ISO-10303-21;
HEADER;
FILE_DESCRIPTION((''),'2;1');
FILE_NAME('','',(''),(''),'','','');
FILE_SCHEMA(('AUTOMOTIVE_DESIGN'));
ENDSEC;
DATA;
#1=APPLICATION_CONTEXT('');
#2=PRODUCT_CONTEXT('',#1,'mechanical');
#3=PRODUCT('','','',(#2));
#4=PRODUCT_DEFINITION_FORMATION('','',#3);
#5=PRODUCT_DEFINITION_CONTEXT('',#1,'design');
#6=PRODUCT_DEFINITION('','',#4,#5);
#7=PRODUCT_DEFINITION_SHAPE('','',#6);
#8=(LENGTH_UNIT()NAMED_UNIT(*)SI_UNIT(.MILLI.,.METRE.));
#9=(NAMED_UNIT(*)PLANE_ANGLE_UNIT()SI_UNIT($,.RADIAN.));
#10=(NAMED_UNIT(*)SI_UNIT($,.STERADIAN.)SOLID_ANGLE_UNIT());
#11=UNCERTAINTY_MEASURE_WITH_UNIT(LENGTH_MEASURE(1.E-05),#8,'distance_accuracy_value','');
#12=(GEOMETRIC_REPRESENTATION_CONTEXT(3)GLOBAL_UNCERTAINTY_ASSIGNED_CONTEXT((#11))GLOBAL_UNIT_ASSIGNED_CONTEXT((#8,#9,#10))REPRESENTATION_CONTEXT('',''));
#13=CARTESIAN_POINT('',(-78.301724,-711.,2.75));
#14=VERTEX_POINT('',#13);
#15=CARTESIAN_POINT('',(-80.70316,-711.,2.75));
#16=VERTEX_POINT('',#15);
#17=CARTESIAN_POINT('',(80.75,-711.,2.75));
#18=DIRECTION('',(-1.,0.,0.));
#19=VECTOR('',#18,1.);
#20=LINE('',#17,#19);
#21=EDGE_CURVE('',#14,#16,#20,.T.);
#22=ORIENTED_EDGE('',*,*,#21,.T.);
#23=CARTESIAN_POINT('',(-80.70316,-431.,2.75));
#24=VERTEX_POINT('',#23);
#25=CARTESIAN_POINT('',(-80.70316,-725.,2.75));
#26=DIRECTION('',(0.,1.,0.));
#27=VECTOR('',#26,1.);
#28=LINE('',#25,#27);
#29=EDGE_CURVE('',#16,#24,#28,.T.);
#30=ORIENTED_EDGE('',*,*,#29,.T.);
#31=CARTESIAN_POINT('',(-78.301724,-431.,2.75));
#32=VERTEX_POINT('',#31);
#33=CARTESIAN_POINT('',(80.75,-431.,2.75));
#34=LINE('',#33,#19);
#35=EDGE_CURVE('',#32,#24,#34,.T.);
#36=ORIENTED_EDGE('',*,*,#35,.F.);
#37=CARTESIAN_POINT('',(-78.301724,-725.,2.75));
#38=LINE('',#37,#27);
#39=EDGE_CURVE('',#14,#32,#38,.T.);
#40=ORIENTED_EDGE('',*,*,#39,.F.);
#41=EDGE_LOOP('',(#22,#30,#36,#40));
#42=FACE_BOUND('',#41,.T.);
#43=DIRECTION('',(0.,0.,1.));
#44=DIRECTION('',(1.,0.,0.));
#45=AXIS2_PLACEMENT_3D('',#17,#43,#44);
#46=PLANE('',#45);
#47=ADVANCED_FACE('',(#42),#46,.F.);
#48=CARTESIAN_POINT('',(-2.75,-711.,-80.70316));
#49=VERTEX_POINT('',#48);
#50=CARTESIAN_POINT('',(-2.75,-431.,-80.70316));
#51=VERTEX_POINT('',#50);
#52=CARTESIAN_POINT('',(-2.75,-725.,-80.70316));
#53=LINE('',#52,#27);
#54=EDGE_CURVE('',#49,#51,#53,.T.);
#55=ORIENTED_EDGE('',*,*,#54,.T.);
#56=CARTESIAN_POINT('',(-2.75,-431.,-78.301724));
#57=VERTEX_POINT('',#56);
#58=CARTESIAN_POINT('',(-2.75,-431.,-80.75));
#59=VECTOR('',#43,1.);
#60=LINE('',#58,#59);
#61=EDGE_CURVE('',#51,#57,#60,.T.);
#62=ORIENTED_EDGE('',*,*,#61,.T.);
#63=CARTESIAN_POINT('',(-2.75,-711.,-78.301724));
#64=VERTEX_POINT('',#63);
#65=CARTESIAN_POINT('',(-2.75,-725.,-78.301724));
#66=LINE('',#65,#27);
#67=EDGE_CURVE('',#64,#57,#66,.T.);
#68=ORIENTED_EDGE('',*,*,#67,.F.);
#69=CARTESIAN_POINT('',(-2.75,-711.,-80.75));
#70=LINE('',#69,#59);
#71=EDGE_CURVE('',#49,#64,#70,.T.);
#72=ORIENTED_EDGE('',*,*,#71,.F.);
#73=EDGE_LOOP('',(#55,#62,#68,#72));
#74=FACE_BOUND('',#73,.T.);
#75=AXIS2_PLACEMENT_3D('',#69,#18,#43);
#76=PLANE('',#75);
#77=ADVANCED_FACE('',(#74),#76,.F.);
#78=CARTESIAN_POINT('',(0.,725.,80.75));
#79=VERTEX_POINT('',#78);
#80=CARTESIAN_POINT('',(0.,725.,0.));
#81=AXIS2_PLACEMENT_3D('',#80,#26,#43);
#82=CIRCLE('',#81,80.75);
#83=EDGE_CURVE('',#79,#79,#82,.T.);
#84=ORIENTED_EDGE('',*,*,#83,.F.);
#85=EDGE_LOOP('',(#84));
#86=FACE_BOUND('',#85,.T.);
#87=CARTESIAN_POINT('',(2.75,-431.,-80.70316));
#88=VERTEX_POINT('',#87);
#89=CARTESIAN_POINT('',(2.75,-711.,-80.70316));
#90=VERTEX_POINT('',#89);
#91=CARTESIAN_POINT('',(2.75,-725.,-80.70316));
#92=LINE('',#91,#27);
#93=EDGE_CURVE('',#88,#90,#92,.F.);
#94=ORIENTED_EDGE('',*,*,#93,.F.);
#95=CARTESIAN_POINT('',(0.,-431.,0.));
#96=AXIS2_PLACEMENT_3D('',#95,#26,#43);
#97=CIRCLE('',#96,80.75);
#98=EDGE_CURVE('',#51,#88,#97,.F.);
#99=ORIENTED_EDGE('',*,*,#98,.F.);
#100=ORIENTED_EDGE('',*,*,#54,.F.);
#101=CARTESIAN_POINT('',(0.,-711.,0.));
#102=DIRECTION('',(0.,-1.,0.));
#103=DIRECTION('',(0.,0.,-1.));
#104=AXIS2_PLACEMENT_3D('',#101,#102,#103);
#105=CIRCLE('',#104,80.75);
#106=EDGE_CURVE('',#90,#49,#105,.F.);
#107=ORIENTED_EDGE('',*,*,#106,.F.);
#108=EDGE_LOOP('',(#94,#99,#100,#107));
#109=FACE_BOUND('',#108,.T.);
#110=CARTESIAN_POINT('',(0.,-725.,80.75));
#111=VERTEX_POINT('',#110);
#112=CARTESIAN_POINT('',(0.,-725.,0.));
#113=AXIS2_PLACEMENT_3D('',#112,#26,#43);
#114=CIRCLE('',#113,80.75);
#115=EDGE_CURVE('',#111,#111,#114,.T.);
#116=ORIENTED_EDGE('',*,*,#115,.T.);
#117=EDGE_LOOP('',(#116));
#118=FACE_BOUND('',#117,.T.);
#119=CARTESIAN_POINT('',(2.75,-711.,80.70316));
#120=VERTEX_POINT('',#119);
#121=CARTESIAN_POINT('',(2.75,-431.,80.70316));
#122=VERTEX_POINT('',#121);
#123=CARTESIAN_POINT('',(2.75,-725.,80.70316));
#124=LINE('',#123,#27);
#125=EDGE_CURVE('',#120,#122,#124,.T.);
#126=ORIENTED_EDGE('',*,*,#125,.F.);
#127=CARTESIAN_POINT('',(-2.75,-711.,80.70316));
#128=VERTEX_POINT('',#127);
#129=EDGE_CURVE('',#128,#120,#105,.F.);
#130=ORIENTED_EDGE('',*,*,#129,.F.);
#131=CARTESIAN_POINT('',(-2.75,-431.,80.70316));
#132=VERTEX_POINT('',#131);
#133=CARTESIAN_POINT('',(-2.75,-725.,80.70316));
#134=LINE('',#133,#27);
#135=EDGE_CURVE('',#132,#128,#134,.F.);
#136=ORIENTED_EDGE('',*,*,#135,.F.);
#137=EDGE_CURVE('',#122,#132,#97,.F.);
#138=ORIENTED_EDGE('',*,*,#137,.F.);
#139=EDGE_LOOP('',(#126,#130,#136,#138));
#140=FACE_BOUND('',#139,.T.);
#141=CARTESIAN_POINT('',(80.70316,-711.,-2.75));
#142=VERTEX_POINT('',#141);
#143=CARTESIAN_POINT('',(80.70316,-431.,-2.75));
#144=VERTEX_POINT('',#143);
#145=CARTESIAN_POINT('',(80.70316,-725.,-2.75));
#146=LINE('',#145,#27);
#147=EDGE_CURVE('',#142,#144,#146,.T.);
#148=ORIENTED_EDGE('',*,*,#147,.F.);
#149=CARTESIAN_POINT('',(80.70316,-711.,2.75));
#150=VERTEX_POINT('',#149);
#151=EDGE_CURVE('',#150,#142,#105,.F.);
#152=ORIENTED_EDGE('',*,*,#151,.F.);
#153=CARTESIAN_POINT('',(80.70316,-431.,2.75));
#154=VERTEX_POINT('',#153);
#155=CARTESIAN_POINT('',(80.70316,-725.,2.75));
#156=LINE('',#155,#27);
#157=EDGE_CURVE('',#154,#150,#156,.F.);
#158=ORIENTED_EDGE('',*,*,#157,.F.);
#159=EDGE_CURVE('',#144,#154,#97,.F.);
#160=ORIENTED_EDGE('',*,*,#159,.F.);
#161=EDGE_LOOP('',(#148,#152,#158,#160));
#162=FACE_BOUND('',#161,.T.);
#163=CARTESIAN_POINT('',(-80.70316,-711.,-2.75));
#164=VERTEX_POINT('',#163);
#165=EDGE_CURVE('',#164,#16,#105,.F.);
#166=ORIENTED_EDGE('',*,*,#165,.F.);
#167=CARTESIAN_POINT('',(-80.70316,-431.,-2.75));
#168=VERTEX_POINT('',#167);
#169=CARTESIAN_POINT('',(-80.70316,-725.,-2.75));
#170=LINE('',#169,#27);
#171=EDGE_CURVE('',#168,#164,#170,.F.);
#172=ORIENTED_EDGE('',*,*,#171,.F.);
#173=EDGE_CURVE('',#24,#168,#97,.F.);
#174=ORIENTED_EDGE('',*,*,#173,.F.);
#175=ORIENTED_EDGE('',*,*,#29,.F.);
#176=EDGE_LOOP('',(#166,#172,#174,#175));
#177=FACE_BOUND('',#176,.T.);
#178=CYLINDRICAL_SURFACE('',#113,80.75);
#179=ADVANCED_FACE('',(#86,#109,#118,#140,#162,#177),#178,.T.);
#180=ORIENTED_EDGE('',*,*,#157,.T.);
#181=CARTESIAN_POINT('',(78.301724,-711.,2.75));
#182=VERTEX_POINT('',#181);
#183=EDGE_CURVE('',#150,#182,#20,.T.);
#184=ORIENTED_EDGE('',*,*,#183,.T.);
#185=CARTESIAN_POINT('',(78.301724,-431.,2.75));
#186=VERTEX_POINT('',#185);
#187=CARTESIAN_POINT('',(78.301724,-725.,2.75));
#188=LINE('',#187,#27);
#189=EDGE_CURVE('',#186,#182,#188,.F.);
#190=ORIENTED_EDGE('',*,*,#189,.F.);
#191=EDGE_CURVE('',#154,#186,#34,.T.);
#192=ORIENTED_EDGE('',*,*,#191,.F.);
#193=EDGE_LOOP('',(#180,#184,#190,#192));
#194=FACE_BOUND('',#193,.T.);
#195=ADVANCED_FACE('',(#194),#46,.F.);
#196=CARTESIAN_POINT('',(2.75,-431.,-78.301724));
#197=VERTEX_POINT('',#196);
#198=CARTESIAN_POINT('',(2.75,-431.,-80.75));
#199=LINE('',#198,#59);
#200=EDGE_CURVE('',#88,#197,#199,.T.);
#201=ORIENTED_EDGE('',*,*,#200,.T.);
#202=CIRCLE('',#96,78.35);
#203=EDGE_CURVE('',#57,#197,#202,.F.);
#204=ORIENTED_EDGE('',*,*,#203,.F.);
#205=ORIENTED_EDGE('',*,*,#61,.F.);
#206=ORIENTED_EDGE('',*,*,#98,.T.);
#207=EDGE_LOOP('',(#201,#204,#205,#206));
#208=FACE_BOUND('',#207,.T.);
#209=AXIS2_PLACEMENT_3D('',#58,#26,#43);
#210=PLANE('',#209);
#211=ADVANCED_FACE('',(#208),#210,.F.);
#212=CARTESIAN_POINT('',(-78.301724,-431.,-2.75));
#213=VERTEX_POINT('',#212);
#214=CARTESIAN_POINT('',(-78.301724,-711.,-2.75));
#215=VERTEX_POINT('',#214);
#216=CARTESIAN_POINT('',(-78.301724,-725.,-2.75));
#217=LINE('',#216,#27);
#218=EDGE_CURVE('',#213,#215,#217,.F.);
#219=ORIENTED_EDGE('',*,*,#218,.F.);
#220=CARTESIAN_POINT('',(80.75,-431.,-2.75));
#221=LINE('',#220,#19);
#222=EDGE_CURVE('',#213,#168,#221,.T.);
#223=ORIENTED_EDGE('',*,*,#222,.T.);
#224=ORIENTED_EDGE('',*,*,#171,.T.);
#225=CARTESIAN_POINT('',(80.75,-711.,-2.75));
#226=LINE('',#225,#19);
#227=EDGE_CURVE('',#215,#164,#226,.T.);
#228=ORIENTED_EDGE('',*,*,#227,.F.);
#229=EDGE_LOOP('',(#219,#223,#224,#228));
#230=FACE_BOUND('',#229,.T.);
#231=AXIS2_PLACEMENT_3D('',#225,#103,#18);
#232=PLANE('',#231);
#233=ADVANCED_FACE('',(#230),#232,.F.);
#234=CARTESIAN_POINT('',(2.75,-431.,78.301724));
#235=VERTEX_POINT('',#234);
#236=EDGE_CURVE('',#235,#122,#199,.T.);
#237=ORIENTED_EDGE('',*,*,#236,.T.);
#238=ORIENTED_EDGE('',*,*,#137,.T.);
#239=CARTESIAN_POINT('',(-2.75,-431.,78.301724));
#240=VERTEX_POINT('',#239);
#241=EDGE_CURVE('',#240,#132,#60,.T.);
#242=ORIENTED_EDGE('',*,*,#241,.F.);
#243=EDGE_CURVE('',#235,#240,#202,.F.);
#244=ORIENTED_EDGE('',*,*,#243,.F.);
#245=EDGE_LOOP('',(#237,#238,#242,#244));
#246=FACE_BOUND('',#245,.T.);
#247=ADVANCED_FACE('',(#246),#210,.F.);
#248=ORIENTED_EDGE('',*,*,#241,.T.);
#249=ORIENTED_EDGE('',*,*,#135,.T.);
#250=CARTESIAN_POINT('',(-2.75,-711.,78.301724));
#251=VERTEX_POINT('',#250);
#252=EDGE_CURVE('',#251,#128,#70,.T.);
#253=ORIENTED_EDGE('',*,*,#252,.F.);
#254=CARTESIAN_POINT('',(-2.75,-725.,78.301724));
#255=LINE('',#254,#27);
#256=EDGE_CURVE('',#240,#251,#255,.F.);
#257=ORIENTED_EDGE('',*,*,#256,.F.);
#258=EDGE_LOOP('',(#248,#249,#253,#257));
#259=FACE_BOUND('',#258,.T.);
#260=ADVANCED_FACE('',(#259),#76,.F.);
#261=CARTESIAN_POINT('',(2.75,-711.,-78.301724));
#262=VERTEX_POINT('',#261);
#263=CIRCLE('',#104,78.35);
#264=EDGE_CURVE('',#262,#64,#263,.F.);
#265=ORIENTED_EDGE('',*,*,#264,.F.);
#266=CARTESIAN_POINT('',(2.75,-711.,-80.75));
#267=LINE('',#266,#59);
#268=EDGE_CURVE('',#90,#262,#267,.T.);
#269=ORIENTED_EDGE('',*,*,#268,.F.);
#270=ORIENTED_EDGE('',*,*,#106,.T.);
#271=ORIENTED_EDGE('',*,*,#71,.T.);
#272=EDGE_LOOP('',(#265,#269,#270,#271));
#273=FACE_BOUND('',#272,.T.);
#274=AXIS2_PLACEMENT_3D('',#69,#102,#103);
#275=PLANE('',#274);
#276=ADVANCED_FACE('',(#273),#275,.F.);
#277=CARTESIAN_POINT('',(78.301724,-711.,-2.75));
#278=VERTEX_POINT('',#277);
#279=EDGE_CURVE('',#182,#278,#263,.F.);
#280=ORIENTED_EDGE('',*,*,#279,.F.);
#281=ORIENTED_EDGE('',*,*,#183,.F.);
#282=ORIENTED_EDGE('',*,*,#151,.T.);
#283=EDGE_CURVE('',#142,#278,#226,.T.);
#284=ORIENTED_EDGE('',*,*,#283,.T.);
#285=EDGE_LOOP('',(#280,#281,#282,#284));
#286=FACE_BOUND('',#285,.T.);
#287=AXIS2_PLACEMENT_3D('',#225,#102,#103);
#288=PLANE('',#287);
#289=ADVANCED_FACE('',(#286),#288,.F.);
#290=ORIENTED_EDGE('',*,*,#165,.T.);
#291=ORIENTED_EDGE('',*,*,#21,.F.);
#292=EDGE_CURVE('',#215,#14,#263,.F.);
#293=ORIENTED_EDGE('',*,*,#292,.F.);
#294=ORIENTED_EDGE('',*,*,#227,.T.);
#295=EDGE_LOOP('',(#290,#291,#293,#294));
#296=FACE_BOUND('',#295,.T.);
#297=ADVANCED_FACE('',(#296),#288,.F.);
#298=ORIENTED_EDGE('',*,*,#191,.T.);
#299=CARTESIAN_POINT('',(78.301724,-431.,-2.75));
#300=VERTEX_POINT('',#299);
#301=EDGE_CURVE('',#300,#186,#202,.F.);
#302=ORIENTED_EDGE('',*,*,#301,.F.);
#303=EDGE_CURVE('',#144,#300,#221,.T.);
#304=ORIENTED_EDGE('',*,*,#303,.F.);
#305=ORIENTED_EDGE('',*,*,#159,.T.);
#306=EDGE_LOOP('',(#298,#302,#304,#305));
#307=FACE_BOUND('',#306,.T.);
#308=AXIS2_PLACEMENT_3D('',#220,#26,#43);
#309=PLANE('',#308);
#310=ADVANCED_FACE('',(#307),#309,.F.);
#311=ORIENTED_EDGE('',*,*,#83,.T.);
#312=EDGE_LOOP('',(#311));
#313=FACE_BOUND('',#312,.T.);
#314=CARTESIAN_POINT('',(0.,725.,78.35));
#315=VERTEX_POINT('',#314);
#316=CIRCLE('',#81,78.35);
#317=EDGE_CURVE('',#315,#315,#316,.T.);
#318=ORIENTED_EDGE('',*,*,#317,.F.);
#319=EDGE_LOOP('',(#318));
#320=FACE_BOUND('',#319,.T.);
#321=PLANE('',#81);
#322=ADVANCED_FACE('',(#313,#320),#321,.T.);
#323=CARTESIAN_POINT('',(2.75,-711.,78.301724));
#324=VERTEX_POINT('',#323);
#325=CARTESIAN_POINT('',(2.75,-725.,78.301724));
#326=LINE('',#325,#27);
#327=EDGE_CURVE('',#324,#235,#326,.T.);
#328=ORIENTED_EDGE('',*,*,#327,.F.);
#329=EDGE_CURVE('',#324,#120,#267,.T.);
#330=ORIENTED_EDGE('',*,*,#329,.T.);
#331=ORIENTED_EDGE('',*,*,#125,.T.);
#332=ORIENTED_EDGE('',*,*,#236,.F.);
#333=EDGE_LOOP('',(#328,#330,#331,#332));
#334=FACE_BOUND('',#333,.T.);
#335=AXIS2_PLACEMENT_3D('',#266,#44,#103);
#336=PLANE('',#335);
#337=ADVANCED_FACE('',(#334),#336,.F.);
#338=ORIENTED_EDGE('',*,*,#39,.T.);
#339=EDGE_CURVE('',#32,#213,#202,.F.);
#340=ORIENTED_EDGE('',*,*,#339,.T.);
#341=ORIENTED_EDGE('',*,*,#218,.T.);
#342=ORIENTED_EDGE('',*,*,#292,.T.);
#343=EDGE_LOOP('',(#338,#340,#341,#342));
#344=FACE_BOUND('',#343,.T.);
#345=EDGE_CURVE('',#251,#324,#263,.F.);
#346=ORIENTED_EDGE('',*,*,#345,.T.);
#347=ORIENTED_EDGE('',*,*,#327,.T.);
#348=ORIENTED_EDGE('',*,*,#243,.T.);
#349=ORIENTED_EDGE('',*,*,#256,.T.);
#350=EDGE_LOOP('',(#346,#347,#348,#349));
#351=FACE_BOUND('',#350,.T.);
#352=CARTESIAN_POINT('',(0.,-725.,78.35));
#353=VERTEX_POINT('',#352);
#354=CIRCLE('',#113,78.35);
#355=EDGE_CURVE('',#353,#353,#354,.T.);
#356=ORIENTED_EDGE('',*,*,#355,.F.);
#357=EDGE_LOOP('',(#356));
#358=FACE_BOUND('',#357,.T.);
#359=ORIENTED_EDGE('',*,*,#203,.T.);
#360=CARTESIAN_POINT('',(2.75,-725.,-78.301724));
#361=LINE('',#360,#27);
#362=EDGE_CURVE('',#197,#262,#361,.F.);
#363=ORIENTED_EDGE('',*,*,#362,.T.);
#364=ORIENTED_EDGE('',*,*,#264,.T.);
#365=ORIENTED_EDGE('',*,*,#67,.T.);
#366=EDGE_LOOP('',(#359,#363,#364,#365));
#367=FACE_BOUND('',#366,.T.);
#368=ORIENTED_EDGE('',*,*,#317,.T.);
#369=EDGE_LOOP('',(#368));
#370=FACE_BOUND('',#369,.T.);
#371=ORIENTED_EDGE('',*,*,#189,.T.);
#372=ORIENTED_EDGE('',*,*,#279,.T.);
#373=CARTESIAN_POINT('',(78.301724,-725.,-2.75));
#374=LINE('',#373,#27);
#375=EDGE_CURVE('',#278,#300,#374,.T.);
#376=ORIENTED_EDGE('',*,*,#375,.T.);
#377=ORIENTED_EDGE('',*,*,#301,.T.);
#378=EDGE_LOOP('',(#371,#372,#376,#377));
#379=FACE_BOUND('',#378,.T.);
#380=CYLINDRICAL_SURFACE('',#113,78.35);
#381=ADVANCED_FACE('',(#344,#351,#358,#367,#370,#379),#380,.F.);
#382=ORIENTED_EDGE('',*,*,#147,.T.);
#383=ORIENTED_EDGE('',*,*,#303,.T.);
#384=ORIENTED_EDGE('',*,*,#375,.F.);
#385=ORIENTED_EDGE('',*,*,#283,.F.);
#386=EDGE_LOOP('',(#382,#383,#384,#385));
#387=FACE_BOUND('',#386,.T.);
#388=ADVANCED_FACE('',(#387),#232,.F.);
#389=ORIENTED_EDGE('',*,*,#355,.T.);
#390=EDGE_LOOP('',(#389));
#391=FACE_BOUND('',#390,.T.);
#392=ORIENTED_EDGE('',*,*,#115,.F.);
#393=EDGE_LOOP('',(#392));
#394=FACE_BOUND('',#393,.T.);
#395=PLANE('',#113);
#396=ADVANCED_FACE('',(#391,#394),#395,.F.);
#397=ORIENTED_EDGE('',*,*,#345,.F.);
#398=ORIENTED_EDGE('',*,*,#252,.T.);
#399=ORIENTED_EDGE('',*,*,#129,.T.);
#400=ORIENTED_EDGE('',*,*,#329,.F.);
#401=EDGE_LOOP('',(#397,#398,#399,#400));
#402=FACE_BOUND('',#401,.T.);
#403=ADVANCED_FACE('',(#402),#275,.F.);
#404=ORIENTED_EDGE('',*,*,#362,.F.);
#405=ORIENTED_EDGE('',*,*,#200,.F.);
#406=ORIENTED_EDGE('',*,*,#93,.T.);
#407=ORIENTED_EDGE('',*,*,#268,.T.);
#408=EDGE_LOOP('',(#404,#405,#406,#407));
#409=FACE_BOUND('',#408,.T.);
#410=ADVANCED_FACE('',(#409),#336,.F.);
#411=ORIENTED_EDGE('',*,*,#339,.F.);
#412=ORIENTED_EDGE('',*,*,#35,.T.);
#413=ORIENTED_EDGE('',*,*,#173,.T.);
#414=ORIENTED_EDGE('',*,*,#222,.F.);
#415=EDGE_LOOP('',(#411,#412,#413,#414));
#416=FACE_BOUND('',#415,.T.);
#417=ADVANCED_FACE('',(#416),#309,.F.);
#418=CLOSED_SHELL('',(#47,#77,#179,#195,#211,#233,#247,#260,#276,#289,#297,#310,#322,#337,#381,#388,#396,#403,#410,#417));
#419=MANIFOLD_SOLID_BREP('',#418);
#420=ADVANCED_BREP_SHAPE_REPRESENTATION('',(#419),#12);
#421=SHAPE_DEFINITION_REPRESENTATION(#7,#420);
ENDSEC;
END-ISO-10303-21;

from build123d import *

# Parameters (mm, degrees)
BOSS_EXTRUDE1_DEPTH      = 725
BOSS_EXTRUDE1_DEPTH_BACK = 725
SKETCH1_R                = 80.75
SKETCH1_R_2              = 78.35
SKETCH2_W                = 5.5
SKETCH2_H                = 280
CUT_EXTRUDE1_DEPTH       = 734.938774694
CIRPATTERN1_START        = -711
CIRPATTERN1_DEPTH        = 280


# Read off the part's stored shape, not the designer's step: CirPattern1
with BuildPart() as part:
    # Sketch1 → Boss-Extrude1 (new, two sides: drawn at the far end of the back side and taken through both)
    with BuildSketch(Plane(origin=(0, 0, 0), x_dir=(1, 0, 0), z_dir=(0, 1, 0)).offset(-BOSS_EXTRUDE1_DEPTH_BACK)):
        with Locations(Location((0, 0, 0), (0, 0, 270))):
            Circle(SKETCH1_R)
        with Locations(Location((0, 0, 0), (0, 0, 270))):
            Circle(SKETCH1_R_2, mode=Mode.SUBTRACT)
    extrude(amount=BOSS_EXTRUDE1_DEPTH + BOSS_EXTRUDE1_DEPTH_BACK)

    # Sketch2 → Cut-Extrude1 (cut, symmetric)
    with BuildSketch(Plane.XY):
        with Locations((0, -571)):
            Rectangle(SKETCH2_W, SKETCH2_H)
    extrude(amount=CUT_EXTRUDE1_DEPTH, both=True, mode=Mode.SUBTRACT)

    # CirPattern1 outline → CirPattern1 (cut)
    with BuildSketch(Plane(origin=(0, 0, 0), x_dir=(1, 0, 0), z_dir=(0, 1, 0)).offset(CIRPATTERN1_START)):
        with BuildLine():
            ThreePointArc((78.301724119, 2.75), (78.35, 0), (78.301724119, -2.75))
            Line((78.301724119, -2.75), (80.703159789, -2.75))
            ThreePointArc((80.703159789, -2.75), (80.75, 0), (80.703159789, 2.75))
            Line((80.703159789, 2.75), (78.301724119, 2.75))
        make_face()
        with BuildLine():
            Line((-80.703159789, -2.75), (-78.301724119, -2.75))
            ThreePointArc((-78.301724119, -2.75), (-78.35, 0), (-78.301724119, 2.75))
            Line((-78.301724119, 2.75), (-80.703159789, 2.75))
            ThreePointArc((-80.703159789, 2.75), (-80.75, 0), (-80.703159789, -2.75))
        make_face()
    extrude(amount=CIRPATTERN1_DEPTH, mode=Mode.SUBTRACT)


solid = part.part
